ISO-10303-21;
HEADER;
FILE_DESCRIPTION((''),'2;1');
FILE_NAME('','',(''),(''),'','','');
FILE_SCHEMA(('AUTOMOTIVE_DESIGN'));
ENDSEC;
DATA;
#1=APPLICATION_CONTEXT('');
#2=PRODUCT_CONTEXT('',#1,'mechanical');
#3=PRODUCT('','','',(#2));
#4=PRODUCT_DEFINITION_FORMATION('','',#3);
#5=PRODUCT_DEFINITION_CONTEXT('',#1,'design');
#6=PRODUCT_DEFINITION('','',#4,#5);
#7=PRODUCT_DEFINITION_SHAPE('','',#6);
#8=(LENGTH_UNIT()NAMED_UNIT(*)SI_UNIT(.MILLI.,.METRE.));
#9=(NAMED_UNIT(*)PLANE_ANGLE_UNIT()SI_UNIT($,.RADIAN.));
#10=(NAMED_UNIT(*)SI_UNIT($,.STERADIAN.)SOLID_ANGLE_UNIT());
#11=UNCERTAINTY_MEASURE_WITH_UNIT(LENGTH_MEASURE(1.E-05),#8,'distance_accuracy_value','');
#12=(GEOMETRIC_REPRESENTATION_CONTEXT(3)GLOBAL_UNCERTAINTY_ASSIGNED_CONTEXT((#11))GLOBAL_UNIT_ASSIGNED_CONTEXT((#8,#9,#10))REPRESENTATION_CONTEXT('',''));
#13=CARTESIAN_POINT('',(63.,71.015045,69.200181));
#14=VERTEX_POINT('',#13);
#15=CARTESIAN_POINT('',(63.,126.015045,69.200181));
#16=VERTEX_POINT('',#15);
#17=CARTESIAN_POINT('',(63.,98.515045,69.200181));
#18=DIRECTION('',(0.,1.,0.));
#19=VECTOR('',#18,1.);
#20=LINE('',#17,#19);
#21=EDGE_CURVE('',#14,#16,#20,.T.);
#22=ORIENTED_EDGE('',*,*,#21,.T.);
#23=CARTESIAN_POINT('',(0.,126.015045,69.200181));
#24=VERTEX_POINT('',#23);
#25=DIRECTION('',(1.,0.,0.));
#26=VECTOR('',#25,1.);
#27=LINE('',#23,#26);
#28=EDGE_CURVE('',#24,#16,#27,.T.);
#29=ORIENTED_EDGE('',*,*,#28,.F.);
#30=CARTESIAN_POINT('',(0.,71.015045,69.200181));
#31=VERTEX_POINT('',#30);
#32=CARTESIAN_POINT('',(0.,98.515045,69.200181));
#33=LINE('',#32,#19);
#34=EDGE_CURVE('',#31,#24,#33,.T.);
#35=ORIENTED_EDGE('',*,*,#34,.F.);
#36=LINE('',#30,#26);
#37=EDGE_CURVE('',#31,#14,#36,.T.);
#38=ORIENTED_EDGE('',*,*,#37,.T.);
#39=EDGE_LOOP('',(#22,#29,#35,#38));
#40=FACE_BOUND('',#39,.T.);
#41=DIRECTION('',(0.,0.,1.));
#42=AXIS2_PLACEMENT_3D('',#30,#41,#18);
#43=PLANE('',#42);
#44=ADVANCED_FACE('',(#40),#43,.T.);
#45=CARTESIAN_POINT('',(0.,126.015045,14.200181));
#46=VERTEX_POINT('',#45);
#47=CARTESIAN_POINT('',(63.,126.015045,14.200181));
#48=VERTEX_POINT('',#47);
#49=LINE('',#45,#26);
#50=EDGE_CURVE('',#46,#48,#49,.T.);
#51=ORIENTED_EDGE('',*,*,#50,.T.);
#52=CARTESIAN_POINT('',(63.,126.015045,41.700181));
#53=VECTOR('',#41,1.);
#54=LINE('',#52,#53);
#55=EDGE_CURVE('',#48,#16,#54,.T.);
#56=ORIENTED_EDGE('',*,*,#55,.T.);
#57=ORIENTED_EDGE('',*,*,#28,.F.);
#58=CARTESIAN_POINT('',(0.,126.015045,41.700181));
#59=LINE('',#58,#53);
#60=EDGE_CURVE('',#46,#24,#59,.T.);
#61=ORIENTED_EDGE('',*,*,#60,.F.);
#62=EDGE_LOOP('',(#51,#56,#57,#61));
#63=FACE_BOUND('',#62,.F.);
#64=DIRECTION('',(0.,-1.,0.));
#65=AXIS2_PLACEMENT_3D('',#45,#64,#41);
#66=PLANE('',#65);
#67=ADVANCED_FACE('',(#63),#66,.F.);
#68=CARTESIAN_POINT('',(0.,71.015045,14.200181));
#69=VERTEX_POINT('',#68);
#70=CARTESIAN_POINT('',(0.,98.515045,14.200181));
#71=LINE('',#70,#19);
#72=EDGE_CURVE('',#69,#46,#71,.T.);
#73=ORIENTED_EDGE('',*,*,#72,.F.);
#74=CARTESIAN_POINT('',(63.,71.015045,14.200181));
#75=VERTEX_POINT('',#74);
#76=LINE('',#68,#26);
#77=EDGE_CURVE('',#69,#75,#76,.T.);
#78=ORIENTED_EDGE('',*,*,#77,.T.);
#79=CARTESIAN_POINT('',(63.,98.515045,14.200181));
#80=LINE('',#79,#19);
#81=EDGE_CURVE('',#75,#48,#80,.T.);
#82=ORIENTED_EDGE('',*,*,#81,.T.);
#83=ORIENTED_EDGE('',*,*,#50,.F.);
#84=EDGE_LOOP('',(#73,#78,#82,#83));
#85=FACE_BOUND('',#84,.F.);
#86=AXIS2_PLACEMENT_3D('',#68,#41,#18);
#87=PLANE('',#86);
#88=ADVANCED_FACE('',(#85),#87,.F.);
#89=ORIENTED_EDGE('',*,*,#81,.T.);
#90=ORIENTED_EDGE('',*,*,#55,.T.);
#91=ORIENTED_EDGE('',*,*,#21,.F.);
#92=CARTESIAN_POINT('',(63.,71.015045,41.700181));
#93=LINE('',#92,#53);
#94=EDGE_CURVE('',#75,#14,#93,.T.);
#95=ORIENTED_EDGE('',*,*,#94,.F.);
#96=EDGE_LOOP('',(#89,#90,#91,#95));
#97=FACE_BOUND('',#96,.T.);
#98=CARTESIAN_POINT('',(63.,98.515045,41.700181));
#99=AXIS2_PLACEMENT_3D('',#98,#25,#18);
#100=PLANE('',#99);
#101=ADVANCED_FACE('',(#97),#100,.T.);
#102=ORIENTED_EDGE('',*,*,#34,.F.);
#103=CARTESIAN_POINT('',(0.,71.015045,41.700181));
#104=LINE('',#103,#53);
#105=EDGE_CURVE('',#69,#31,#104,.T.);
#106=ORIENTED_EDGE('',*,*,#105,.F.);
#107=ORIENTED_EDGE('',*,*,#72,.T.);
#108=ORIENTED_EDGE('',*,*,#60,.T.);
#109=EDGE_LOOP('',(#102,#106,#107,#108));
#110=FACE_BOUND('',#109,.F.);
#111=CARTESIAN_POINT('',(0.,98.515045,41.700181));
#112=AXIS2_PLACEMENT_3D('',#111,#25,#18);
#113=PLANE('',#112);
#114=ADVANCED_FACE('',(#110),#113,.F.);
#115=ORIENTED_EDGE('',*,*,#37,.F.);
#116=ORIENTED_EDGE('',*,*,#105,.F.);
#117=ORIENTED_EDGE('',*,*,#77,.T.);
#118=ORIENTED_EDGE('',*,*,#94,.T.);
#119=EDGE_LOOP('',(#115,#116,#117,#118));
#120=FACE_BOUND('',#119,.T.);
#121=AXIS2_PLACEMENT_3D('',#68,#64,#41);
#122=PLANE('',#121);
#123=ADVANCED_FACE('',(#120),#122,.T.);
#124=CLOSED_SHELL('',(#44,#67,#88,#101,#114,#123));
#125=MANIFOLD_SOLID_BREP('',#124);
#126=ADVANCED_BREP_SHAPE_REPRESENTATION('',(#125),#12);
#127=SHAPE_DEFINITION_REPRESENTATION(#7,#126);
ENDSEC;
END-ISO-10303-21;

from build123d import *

# Parameters (mm, degrees)
F0_W     = 55
F0_H     = 55
F1_DEPTH = 63


# Not quite as in the source:
# - a feature names something its author has since deleted; it is built from what else it names


with BuildPart() as f1:
    # F0 (on Right) → F1 (new body)
    with BuildSketch(Plane.YZ):
        with Locations((98.5150450468, 41.700180769)):
            Rectangle(F0_W, F0_H)
    extrude(amount=F1_DEPTH)


solid = f1.part
